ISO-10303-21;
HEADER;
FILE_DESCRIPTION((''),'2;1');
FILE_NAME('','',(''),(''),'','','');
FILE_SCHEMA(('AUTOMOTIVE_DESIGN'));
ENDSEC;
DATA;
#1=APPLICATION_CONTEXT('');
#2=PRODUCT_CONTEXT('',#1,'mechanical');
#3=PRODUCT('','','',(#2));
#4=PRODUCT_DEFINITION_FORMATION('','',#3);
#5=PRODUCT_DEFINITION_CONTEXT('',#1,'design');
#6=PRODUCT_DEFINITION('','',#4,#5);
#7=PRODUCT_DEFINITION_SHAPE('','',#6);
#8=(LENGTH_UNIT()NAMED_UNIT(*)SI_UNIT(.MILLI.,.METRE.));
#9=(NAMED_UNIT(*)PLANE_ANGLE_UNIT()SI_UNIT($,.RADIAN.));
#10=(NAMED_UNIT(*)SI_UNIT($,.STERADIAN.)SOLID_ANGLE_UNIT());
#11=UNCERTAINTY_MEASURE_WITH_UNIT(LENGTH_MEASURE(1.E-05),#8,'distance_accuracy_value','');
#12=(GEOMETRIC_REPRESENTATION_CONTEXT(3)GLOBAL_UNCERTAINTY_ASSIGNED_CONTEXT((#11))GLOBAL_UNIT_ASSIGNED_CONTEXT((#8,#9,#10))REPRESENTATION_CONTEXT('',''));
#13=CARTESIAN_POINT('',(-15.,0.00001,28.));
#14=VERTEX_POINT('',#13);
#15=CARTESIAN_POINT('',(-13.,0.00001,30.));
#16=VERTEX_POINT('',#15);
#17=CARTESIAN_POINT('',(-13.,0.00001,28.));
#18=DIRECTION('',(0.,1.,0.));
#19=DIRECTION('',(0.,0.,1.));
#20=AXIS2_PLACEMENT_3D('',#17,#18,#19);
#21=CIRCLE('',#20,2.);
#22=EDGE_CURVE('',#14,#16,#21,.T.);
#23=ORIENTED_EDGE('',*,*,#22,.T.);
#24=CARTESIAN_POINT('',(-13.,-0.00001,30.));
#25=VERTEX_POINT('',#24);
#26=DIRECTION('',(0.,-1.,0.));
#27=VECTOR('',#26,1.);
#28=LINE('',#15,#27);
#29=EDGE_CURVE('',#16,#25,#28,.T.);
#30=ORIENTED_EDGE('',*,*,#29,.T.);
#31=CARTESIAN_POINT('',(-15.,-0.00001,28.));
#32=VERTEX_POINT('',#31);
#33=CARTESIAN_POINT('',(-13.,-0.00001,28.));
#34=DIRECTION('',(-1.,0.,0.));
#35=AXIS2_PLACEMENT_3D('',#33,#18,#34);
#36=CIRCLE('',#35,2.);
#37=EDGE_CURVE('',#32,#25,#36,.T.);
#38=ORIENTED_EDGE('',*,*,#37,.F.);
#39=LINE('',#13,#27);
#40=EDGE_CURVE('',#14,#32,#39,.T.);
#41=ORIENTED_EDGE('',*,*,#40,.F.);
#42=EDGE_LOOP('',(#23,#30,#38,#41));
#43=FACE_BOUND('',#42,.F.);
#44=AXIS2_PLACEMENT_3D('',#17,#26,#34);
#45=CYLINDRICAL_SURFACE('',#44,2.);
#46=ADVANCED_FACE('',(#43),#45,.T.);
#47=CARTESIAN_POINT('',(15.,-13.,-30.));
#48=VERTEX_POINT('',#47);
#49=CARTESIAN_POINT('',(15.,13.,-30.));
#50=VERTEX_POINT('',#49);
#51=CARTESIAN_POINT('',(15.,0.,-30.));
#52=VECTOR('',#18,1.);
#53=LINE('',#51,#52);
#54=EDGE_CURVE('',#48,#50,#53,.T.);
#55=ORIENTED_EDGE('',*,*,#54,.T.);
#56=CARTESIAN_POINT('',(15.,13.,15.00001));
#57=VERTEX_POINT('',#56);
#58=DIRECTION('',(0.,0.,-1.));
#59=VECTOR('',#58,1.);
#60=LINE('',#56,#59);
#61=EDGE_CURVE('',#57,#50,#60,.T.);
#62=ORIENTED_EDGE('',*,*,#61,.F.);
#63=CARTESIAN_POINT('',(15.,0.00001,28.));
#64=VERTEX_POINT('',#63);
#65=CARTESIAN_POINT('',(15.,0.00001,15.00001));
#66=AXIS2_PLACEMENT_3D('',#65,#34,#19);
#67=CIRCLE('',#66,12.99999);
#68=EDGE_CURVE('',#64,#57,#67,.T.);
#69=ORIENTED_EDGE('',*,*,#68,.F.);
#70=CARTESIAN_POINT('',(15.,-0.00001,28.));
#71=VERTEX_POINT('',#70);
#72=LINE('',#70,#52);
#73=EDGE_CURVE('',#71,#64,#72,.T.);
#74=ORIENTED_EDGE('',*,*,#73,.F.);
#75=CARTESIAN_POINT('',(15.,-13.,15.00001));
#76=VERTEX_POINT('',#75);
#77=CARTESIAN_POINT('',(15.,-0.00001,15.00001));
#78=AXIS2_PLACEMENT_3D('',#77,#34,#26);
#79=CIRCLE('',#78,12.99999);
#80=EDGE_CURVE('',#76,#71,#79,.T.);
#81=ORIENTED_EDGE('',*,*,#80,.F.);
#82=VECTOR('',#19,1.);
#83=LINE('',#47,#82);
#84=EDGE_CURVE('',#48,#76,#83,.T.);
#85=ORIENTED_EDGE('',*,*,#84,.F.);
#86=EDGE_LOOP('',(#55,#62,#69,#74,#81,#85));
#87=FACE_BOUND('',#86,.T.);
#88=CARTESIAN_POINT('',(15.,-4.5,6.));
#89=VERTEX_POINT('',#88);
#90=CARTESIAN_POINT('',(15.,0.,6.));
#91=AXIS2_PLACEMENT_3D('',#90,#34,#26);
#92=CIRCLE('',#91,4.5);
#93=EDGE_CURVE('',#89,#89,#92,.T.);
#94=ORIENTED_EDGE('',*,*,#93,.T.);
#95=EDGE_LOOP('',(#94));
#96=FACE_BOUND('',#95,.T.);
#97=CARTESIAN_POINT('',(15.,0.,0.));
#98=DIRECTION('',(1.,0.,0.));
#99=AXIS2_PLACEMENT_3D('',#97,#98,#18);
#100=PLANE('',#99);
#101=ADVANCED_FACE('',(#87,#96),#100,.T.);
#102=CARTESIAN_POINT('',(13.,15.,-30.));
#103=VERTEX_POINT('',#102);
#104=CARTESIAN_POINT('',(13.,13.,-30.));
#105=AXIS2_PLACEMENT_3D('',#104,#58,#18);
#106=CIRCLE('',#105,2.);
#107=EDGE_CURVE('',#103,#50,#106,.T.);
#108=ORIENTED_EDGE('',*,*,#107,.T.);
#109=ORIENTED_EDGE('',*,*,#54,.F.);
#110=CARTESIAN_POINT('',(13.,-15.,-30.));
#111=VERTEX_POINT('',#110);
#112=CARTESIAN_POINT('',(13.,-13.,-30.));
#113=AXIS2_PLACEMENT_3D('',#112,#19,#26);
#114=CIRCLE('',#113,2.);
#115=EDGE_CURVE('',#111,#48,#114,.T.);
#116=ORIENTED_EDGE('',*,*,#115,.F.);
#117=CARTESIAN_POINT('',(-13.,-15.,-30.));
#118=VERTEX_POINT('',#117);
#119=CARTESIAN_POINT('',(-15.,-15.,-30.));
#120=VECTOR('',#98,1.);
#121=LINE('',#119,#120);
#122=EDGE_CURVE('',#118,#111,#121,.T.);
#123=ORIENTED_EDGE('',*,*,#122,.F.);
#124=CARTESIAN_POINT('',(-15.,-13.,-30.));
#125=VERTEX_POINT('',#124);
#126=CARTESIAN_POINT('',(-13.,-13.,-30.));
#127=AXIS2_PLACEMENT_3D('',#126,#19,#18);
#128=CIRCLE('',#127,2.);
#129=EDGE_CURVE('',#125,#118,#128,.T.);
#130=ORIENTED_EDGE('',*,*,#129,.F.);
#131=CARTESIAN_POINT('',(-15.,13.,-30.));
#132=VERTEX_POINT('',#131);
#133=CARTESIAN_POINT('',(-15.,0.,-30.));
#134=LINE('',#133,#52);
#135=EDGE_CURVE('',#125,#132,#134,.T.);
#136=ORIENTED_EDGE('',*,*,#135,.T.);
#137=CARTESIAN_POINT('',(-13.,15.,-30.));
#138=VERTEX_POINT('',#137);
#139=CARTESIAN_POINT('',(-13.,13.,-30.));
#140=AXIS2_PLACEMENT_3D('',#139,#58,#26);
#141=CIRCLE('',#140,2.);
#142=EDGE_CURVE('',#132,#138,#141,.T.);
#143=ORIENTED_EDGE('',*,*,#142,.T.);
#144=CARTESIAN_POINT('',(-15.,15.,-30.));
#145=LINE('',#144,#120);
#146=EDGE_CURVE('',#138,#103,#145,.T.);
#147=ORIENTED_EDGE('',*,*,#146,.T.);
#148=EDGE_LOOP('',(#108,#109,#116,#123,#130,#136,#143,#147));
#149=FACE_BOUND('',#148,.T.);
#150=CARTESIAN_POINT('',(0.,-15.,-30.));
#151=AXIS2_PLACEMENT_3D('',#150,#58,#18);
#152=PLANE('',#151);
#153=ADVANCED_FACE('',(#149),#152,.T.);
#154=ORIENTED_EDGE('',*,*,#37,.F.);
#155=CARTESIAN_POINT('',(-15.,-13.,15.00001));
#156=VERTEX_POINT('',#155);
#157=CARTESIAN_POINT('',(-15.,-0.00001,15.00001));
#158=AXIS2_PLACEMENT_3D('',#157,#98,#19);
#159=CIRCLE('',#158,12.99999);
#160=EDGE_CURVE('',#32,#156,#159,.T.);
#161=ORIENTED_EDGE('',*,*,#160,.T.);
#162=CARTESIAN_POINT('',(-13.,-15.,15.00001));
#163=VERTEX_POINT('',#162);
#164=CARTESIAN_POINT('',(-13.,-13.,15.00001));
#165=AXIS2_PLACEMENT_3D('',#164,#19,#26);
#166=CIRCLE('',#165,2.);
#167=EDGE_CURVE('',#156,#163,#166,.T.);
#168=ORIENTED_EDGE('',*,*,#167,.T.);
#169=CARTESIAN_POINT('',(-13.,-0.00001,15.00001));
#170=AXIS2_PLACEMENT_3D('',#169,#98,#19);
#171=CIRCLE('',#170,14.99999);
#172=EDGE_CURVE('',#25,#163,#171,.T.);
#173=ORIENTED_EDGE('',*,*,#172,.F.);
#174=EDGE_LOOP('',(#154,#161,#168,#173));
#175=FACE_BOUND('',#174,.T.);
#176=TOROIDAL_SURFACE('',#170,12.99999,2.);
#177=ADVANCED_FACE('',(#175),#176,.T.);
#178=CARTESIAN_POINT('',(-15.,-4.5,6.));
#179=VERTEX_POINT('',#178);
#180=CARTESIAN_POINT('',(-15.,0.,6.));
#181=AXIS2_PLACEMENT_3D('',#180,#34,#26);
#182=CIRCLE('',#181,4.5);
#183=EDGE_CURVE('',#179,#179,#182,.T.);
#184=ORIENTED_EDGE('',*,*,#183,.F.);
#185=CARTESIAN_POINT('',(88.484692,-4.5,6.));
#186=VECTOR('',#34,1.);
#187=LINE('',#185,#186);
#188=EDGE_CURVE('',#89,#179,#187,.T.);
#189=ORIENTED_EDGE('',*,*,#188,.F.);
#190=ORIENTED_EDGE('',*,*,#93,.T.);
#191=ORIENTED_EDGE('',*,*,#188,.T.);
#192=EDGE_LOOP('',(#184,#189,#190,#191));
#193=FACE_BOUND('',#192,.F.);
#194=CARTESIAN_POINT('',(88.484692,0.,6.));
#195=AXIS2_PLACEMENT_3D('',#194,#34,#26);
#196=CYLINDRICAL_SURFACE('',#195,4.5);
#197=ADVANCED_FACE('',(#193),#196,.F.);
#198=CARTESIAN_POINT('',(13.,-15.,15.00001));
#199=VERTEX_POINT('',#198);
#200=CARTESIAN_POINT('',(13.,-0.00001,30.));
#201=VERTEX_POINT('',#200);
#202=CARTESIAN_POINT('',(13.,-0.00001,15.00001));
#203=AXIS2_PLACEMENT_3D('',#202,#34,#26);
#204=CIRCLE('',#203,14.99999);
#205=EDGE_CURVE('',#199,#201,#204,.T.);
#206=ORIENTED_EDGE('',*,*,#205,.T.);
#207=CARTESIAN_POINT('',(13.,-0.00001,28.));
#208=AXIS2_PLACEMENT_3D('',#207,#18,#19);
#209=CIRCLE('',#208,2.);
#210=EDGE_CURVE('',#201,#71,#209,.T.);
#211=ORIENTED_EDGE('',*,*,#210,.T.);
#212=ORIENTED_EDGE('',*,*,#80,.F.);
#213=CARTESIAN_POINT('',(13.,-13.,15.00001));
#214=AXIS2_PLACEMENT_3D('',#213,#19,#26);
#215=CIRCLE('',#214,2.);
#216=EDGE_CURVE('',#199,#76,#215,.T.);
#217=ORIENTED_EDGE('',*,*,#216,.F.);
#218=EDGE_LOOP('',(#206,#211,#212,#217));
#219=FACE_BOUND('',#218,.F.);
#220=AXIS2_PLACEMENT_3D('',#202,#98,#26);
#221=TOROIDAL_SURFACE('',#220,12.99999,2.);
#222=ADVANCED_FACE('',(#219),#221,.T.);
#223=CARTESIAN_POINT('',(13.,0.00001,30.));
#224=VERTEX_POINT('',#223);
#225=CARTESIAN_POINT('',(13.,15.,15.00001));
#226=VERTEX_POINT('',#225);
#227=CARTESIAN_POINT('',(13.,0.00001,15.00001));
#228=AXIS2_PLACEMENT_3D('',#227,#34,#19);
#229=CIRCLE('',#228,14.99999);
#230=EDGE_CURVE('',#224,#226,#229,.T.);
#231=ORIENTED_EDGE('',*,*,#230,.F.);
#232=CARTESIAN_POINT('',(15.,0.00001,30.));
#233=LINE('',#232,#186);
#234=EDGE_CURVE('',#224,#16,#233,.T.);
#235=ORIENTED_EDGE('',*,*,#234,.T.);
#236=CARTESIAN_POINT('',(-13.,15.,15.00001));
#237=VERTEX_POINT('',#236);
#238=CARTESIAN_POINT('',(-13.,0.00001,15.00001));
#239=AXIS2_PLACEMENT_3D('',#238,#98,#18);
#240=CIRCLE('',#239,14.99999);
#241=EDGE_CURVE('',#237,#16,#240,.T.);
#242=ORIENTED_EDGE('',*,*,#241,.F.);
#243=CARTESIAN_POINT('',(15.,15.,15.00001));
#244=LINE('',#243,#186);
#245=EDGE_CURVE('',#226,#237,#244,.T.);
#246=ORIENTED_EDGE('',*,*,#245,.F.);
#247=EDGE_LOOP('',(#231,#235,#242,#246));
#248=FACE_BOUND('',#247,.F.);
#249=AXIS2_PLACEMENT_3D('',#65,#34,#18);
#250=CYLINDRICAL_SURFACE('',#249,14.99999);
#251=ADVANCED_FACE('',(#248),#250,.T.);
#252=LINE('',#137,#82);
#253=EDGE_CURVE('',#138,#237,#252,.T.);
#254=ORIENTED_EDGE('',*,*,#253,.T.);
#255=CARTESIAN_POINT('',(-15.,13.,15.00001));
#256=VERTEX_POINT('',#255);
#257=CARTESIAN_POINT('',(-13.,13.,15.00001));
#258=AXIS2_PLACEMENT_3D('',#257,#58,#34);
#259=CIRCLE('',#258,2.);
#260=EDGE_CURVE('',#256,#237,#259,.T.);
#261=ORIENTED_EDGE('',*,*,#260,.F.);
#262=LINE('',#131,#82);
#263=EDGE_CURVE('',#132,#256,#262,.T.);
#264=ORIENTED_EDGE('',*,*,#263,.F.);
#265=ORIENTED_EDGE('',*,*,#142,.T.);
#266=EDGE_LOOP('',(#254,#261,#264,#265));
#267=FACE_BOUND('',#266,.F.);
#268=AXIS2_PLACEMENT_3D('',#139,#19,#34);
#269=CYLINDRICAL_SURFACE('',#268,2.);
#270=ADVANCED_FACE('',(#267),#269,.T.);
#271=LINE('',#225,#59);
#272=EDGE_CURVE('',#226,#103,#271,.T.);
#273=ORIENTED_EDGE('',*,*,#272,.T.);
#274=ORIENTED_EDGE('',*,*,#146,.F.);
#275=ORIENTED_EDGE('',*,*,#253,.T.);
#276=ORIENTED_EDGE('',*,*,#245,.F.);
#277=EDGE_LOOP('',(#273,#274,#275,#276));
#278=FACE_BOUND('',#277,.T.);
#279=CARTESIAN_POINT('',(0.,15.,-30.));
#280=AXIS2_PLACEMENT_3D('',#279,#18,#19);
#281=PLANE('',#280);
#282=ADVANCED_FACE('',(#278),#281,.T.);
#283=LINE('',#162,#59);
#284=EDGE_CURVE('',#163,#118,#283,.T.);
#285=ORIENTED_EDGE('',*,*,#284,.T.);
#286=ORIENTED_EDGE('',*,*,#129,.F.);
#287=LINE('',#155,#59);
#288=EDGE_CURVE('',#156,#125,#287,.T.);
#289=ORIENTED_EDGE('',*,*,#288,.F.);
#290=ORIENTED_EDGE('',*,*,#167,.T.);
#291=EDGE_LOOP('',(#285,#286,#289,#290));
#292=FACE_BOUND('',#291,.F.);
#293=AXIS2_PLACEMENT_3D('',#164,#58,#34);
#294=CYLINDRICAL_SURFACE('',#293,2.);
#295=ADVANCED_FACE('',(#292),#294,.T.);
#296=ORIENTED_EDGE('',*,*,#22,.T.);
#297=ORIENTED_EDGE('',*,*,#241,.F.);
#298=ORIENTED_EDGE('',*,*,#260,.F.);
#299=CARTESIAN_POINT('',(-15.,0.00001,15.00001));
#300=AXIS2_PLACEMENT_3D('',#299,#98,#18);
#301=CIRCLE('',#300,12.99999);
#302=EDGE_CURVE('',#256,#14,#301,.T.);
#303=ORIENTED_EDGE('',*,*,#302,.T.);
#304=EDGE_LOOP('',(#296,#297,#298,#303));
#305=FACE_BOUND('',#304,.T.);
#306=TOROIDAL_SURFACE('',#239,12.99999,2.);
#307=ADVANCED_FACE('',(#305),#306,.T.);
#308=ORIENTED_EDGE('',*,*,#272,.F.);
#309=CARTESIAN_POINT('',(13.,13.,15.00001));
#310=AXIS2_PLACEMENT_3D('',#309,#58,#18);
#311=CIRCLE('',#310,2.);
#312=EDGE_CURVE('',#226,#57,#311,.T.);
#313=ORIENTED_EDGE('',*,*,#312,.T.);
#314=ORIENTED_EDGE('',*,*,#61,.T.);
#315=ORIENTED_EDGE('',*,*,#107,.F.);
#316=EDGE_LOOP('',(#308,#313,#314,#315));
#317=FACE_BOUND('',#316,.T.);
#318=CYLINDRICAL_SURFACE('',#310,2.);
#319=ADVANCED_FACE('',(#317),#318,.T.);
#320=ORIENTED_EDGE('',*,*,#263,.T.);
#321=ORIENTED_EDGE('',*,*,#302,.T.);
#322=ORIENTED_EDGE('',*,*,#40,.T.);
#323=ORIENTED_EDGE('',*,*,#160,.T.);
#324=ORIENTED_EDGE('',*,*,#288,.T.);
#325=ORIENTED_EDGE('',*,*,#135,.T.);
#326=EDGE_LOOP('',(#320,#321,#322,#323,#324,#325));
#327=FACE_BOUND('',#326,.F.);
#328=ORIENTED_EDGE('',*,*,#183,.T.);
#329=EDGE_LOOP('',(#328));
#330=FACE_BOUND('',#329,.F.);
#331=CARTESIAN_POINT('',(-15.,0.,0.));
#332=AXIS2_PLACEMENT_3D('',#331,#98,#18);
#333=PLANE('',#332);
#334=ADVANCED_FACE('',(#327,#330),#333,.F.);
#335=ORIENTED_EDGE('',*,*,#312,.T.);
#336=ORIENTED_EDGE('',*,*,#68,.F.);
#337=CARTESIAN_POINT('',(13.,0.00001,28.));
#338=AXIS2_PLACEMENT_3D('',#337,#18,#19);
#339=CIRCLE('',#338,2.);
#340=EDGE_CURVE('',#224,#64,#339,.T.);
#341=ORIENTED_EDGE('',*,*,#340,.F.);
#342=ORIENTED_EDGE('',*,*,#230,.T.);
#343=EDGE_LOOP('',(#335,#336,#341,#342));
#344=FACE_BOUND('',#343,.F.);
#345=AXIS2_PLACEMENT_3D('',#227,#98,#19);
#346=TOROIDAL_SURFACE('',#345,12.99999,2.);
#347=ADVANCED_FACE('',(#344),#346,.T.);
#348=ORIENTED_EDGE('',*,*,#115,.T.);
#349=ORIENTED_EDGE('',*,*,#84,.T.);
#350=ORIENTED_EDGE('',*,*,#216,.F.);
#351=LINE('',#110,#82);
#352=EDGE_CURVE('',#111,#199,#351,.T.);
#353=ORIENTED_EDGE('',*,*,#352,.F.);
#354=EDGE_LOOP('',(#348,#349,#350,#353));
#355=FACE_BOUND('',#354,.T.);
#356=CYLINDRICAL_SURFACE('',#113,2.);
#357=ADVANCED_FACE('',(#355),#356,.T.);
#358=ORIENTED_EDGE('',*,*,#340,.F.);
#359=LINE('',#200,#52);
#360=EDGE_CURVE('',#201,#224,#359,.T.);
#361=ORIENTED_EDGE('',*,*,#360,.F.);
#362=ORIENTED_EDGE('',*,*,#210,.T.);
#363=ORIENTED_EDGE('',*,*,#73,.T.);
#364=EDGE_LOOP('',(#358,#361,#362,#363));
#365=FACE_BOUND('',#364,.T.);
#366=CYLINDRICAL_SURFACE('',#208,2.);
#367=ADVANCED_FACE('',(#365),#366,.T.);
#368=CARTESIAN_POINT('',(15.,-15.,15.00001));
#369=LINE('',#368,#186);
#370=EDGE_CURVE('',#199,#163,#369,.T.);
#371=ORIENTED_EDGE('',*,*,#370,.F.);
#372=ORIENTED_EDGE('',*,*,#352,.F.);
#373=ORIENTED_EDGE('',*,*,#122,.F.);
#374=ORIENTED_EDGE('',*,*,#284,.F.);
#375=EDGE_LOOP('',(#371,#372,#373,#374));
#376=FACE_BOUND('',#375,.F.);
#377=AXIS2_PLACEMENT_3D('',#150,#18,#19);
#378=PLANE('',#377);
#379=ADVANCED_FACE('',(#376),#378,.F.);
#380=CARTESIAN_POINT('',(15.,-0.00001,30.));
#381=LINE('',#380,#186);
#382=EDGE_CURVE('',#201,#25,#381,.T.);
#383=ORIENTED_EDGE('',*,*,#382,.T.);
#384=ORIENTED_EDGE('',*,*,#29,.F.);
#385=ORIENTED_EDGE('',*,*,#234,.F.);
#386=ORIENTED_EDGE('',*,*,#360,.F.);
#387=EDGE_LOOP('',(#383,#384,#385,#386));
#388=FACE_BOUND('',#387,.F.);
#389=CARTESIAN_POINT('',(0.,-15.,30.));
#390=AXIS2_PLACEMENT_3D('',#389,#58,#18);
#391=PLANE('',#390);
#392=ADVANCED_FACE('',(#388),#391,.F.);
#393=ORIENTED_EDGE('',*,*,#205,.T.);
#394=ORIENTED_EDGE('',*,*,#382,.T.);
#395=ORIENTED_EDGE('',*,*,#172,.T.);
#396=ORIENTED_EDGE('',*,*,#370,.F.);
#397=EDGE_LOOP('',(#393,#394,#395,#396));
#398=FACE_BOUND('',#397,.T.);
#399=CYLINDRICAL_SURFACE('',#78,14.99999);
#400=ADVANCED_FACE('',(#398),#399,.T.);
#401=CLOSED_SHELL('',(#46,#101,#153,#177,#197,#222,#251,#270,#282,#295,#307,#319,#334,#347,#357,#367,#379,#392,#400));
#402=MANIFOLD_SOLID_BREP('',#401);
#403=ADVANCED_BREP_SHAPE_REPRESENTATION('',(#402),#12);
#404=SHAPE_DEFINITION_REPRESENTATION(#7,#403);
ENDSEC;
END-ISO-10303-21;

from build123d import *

# Parameters (mm, degrees)
F0_W     = 30
F0_H     = 60
F1_DEPTH = 15
F3_R     = 14.99999
F4_R     = 2
F5_D     = 9


# Not quite as in the source:
# - a fillet or chamfer is up to 0.001 mm smaller than in the source, because OpenCascade refuses the exact size


with BuildPart() as f1:
    # F0 (on Right) → F1 (new body, symmetric)
    with BuildSketch(Plane.YZ):
        Rectangle(F0_W, F0_H)
    extrude(amount=F1_DEPTH, both=True)

    # F3 (radius 15 in the source; OpenCascade refuses exactly that, so slightly less here)
    f3_edges = [f1.edges().sort_by_distance(p)[0] for p in [
        (0, -15, 30),
        (0, 15, 30),
    ]]
    fillet(f3_edges, radius=F3_R)

    # F4
    f4_edges = [f1.edges().sort_by_distance(p)[0] for p in [
        (15, -15, -7.499995),
        (-15, 15, -7.499995),
        (-15, -10.606605, 25.606605),
    ]]
    fillet(f4_edges, radius=F4_R)

    # F5 (through all)
    with Locations(Plane.YZ.offset(15)):
        with Locations((0, 6)):
            Hole(F5_D / 2)


solid = f1.part
